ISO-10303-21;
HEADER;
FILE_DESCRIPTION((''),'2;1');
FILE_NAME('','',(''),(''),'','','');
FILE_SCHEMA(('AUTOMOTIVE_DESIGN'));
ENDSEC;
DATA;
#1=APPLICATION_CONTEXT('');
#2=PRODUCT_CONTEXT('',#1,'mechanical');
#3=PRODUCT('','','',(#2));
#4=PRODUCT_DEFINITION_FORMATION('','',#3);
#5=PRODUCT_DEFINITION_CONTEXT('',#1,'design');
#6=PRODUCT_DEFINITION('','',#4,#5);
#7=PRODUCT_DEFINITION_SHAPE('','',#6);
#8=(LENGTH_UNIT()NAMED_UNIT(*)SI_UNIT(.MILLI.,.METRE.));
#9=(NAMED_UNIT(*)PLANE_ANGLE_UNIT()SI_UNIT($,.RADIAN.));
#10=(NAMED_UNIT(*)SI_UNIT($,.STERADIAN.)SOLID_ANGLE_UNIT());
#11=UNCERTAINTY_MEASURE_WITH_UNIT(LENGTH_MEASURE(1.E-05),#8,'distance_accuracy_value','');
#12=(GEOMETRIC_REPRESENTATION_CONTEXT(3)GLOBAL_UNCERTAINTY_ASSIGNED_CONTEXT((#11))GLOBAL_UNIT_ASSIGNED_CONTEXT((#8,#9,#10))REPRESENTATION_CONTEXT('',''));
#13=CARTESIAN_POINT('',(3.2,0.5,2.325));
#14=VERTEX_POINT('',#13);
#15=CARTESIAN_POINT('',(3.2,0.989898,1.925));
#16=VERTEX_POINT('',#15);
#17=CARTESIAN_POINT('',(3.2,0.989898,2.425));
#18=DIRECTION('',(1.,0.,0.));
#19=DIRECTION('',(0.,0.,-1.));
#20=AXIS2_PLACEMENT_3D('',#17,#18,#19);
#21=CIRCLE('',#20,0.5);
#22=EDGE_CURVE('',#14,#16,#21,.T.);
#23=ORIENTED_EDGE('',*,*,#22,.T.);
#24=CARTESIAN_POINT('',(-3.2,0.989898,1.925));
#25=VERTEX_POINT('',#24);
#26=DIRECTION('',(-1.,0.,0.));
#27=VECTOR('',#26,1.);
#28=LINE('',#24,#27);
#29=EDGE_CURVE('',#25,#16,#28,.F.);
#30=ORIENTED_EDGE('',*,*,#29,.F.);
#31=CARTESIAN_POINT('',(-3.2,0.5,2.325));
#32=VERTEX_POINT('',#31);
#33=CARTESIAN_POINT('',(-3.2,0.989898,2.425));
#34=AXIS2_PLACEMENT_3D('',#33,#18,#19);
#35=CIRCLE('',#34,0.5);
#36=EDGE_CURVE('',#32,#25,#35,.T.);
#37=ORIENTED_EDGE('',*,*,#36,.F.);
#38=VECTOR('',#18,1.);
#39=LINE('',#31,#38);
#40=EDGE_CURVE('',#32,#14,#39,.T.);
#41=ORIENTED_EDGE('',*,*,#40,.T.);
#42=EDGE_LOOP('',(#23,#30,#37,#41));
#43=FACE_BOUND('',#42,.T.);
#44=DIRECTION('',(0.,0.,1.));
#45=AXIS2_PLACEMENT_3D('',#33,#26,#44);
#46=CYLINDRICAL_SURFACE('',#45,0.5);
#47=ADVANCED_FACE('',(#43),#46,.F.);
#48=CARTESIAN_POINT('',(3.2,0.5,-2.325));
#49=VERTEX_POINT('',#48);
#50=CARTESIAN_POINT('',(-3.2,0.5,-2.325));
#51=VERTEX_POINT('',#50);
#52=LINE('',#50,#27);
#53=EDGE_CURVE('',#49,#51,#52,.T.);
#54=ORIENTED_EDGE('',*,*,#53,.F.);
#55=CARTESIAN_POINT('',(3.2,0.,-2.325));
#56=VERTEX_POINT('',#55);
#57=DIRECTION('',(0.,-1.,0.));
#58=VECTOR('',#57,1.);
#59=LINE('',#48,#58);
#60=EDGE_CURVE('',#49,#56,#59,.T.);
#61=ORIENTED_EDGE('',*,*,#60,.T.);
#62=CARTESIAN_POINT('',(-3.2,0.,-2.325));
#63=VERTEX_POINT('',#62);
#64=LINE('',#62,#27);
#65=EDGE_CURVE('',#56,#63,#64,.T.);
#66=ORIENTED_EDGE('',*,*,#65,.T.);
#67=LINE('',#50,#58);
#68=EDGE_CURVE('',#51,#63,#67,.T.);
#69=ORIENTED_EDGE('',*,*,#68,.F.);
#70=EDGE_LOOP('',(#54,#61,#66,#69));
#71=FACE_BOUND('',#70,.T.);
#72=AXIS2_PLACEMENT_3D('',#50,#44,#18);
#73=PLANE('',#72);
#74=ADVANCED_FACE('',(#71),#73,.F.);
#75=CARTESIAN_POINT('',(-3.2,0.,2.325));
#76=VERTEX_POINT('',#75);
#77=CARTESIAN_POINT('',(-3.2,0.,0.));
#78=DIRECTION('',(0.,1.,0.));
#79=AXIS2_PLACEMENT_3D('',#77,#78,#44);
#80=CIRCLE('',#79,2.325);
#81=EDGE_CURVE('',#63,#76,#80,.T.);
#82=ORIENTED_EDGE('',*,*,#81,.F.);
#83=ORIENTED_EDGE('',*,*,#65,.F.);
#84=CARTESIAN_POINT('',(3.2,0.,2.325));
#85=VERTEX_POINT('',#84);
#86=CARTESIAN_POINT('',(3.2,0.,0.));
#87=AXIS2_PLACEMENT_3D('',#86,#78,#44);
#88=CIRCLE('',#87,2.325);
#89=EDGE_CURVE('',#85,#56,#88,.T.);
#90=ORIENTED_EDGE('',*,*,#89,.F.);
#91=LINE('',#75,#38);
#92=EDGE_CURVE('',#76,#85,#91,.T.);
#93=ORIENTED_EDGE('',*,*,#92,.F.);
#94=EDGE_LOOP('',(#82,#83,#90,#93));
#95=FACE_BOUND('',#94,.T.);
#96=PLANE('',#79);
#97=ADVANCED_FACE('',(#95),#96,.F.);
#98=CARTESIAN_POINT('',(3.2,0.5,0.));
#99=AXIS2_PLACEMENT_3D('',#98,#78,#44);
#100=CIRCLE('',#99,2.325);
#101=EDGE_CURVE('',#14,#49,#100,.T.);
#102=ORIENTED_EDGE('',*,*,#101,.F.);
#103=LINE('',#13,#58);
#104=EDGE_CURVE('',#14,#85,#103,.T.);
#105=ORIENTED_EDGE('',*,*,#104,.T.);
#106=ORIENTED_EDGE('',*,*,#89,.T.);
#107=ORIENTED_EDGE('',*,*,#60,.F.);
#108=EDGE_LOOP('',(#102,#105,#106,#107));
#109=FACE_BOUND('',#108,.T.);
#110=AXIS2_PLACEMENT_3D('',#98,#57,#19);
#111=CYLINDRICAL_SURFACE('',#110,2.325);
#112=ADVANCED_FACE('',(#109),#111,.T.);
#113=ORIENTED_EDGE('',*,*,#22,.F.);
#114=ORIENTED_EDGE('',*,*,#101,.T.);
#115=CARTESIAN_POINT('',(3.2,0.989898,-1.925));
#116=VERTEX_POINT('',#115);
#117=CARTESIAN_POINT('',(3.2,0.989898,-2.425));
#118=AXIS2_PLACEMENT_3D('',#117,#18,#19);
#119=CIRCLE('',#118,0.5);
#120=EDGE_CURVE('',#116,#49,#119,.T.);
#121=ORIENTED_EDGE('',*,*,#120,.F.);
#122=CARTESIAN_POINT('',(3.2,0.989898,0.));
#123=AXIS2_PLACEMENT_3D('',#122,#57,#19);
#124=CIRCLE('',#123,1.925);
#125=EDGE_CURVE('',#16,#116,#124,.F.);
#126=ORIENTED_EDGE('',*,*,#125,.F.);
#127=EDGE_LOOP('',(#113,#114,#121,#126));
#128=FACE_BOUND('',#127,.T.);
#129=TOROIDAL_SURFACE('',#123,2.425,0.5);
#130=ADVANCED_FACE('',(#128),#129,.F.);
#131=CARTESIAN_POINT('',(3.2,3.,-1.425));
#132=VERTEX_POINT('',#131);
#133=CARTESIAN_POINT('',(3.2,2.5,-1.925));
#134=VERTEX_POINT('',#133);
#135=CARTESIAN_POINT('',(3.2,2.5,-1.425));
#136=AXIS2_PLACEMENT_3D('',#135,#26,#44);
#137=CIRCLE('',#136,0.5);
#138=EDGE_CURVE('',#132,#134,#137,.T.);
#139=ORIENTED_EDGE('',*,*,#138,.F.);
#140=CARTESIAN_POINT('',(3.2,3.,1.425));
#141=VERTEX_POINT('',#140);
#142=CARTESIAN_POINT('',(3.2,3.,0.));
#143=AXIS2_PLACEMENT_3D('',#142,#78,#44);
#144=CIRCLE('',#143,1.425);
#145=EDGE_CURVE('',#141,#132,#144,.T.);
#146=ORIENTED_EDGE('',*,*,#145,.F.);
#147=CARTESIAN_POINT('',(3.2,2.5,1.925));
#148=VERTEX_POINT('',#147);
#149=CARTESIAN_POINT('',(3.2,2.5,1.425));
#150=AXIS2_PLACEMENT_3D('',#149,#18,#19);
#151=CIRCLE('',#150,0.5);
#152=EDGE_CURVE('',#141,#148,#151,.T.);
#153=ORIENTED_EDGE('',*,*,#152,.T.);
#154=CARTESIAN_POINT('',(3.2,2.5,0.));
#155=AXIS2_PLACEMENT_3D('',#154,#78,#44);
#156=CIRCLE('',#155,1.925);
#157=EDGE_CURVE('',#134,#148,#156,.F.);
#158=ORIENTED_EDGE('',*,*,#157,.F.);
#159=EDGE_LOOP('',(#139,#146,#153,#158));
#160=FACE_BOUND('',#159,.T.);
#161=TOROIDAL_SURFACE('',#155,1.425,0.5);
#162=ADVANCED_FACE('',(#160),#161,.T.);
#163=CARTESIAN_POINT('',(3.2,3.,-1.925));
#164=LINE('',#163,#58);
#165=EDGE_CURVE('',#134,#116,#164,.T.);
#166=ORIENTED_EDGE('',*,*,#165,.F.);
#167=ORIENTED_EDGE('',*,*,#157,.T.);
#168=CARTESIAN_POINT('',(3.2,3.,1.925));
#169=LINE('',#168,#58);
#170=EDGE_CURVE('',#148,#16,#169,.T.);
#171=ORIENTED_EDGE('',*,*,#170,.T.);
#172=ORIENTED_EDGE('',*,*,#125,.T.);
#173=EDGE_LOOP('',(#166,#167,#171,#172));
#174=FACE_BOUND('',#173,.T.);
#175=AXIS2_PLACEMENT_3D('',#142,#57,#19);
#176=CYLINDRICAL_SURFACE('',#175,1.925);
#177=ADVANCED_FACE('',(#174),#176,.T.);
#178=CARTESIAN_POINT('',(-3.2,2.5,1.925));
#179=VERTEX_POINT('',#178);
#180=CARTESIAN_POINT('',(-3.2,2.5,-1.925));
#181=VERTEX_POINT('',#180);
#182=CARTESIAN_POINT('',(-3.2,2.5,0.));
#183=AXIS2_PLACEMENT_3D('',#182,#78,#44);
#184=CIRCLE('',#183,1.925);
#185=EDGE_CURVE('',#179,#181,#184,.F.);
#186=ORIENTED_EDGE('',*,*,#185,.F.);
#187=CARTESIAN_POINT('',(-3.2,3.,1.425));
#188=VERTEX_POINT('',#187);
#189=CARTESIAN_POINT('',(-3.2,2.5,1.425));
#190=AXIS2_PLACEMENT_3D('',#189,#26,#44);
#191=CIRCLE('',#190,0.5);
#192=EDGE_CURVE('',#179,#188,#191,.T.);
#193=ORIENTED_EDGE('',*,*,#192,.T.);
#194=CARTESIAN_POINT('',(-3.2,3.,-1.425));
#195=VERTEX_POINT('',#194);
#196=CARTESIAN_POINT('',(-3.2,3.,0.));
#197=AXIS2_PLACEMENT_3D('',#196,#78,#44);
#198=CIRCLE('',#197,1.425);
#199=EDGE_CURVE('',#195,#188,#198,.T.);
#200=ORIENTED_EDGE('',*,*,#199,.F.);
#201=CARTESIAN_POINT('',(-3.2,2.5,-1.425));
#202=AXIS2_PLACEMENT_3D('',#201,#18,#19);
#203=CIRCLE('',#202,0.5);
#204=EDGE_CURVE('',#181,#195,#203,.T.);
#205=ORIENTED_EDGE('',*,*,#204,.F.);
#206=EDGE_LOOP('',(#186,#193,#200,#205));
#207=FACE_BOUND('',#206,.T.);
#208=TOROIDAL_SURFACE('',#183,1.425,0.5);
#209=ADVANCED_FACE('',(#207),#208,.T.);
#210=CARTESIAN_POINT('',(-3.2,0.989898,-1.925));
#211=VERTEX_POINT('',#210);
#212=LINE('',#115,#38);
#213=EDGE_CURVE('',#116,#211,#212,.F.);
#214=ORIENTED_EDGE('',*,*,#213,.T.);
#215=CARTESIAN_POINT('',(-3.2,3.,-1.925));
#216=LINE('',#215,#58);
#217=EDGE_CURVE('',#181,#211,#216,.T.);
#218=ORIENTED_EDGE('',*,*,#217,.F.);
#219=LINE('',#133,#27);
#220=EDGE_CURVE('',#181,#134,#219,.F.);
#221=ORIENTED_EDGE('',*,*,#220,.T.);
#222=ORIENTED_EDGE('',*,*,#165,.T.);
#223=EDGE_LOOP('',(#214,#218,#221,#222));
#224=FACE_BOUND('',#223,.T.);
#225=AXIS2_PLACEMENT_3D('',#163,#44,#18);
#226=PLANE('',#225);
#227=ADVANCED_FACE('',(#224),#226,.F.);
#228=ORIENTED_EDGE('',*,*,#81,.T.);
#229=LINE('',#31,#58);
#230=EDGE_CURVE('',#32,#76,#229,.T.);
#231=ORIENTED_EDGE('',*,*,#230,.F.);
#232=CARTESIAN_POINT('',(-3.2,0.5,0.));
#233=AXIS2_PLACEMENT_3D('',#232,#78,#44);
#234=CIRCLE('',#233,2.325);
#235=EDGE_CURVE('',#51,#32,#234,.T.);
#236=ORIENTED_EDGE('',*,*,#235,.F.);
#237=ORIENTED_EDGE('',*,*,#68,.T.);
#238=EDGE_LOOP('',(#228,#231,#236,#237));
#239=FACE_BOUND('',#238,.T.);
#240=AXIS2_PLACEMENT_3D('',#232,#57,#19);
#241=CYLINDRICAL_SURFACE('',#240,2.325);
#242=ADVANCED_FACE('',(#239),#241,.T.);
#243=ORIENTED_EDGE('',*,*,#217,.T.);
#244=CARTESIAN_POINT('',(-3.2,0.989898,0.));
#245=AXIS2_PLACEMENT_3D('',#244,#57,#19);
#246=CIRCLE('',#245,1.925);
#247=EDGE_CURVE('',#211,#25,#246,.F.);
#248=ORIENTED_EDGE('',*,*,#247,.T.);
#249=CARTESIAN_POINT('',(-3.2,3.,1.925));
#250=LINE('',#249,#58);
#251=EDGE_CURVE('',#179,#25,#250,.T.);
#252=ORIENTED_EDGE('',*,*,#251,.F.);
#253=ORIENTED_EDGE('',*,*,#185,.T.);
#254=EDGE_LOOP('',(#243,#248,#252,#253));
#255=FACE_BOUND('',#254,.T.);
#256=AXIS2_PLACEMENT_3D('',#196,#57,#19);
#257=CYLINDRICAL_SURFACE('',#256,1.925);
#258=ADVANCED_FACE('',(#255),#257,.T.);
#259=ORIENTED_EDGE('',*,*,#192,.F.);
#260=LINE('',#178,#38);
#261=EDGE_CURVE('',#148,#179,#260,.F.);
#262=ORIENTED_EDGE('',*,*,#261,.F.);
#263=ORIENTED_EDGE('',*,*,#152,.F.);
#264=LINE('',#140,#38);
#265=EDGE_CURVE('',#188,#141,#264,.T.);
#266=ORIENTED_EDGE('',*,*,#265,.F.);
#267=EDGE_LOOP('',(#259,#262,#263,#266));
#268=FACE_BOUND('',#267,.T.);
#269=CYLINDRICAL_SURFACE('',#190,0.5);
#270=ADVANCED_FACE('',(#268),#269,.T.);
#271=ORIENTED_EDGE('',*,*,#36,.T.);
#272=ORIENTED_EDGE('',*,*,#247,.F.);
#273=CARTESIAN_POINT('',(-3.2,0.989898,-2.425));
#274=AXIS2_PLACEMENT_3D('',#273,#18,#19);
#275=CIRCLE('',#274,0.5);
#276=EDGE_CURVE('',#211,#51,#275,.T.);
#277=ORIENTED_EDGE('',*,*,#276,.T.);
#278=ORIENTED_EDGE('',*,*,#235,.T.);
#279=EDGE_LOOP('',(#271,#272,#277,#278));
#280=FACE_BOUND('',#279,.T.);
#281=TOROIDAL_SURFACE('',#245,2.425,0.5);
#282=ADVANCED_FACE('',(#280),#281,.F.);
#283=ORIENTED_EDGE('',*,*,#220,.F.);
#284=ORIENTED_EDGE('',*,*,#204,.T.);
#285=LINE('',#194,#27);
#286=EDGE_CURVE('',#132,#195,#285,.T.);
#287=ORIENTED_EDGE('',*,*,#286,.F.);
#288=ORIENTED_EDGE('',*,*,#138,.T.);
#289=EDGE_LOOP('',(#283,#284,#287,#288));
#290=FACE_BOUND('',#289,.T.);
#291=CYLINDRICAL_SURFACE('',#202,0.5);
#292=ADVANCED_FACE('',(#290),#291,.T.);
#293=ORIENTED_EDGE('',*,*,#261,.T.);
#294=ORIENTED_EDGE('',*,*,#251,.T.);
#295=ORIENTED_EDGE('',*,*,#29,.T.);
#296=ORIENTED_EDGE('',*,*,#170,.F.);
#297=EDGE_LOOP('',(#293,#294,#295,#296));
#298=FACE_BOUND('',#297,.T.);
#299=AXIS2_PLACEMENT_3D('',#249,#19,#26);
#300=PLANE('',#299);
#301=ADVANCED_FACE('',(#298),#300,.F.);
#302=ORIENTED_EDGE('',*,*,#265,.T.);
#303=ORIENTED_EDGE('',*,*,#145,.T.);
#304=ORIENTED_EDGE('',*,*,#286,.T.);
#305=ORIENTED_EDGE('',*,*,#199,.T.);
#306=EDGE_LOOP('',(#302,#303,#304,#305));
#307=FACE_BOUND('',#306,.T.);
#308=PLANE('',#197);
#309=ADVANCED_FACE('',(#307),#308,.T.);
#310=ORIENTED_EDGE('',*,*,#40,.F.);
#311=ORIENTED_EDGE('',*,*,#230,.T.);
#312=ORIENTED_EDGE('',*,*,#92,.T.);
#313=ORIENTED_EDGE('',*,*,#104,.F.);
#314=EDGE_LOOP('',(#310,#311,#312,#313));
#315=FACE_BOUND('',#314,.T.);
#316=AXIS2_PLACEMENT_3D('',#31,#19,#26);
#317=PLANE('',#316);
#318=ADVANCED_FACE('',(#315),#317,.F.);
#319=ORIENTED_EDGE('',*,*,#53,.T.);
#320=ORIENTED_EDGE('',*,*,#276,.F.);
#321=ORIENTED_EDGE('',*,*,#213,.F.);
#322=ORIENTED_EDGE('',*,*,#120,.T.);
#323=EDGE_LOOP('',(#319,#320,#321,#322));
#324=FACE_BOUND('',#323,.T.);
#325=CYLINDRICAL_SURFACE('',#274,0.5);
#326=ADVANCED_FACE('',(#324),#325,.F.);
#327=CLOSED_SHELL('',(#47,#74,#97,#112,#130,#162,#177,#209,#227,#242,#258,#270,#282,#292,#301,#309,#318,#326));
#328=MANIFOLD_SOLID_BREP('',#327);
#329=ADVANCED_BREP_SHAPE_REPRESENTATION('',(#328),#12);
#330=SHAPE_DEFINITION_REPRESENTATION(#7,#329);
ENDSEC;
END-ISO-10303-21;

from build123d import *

# Parameters (mm, degrees)
BOSS_EXTRUDE1_DEPTH = 0.5
BOSS_EXTRUDE2_DEPTH = 2.5
FILLET1_R           = 0.5
FILLET3_R           = 0.5


with BuildPart() as part:
    # Sketch1 → Boss-Extrude1 (new body)
    with BuildSketch(Plane(origin=(0, 0, 0), x_dir=(1, 0, 0), z_dir=(0, 1, 0))):
        with BuildLine():
            Line((-3.2, 2.325), (3.2, 2.325))
            ThreePointArc((3.2, 2.325), (5.525, 0), (3.2, -2.325))
            Line((3.2, -2.325), (-3.2, -2.325))
            ThreePointArc((-3.2, -2.325), (-5.525, 0), (-3.2, 2.325))
        make_face()
    extrude(amount=BOSS_EXTRUDE1_DEPTH)

    # Sketch2 → Boss-Extrude2 (add)
    with BuildSketch(Plane(origin=(0, 0.5, 0), x_dir=(1, 0, 0), z_dir=(0, 1, 0))):
        with BuildLine():
            Line((-3.2, -1.925), (3.2, -1.925))
            ThreePointArc((3.2, -1.925), (5.125, 0), (3.2, 1.925))
            Line((3.2, 1.925), (-3.2, 1.925))
            ThreePointArc((-3.2, 1.925), (-5.125, 0), (-3.2, -1.925))
        make_face()
    extrude(amount=BOSS_EXTRUDE2_DEPTH)

    # Fillet1
    # the kernel refuses this fillet: 0.5 mm, written as the material it adds along each edge
    with BuildSketch(Plane(origin=(-3.2, 0.5, 0), x_dir=(0, 0, -1), z_dir=(1, 0, 0))) as fillet1_piece_1:
        with BuildLine():
            CenterArc((2.425, 0.489897949), FILLET1_R, 180, 78.463040967)
            Line((1.925, 0.489897949), (1.915, 0.489897949))
            Line((1.915, 0.489897949), (1.915, 0))
            Line((1.915, 0), (1.925, -0.01))
            ThreePointArc((1.925, -0.01), (2.125, -0.01), (2.323, -0.009797959))
            Line((2.323, -0.009797959), (2.325, 0))
        make_face()
    revolve(axis=Axis((-3.2, 0.5, 0), (0, 1, 0)), revolution_arc=180)
    with BuildSketch(Plane(origin=(-3.2, 0.5, 1.925), x_dir=(0, 1.5665246877455952e-12, 1.0), z_dir=(1, 0, 0)), Plane(origin=(3.2, 0.5, -1.925), x_dir=(0, 1.5665246877455952e-12, -1.0), z_dir=(-1, 0, 0))) as fillet1_piece_2:
        with BuildLine():
            CenterArc((0.5, -0.489897949), FILLET1_R, 101.536959033, 78.463040967)
            Line((0, -0.489897949), (-0.01, -0.489897949))
            Line((-0.01, -0.489897949), (-0.01, 0))
            Line((-0.01, 0), (0, 0.01))
            ThreePointArc((0, 0.01), (0.2, 0.01), (0.398, 0.009797959))
            Line((0.398, 0.009797959), (0.4, 0))
        make_face()
    extrude(amount=6.4)
    with BuildSketch(Plane(origin=(3.2, 0.5, 0), x_dir=(0, 0, 1), z_dir=(-1, 0, 0))) as fillet1_piece_3:
        with BuildLine():
            CenterArc((2.425, 0.489897949), FILLET1_R, 180, 78.463040967)
            Line((1.925, 0.489897949), (1.915, 0.489897949))
            Line((1.915, 0.489897949), (1.915, 0))
            Line((1.915, 0), (1.925, -0.01))
            ThreePointArc((1.925, -0.01), (2.125, -0.01), (2.323, -0.009797959))
            Line((2.323, -0.009797959), (2.325, 0))
        make_face()
    revolve(axis=Axis((3.2, 0.5, 0), (0, 1, 0)), revolution_arc=180)

    # Fillet3
    fillet3_edges = [part.edges().sort_by_distance(p)[0] for p in [
        (-5.125, 3, 0),
        (0, 3, 1.925),
        (5.125, 3, 0),
        (0, 3, -1.925),
    ]]
    fillet(fillet3_edges, radius=FILLET3_R)


solid = part.part
